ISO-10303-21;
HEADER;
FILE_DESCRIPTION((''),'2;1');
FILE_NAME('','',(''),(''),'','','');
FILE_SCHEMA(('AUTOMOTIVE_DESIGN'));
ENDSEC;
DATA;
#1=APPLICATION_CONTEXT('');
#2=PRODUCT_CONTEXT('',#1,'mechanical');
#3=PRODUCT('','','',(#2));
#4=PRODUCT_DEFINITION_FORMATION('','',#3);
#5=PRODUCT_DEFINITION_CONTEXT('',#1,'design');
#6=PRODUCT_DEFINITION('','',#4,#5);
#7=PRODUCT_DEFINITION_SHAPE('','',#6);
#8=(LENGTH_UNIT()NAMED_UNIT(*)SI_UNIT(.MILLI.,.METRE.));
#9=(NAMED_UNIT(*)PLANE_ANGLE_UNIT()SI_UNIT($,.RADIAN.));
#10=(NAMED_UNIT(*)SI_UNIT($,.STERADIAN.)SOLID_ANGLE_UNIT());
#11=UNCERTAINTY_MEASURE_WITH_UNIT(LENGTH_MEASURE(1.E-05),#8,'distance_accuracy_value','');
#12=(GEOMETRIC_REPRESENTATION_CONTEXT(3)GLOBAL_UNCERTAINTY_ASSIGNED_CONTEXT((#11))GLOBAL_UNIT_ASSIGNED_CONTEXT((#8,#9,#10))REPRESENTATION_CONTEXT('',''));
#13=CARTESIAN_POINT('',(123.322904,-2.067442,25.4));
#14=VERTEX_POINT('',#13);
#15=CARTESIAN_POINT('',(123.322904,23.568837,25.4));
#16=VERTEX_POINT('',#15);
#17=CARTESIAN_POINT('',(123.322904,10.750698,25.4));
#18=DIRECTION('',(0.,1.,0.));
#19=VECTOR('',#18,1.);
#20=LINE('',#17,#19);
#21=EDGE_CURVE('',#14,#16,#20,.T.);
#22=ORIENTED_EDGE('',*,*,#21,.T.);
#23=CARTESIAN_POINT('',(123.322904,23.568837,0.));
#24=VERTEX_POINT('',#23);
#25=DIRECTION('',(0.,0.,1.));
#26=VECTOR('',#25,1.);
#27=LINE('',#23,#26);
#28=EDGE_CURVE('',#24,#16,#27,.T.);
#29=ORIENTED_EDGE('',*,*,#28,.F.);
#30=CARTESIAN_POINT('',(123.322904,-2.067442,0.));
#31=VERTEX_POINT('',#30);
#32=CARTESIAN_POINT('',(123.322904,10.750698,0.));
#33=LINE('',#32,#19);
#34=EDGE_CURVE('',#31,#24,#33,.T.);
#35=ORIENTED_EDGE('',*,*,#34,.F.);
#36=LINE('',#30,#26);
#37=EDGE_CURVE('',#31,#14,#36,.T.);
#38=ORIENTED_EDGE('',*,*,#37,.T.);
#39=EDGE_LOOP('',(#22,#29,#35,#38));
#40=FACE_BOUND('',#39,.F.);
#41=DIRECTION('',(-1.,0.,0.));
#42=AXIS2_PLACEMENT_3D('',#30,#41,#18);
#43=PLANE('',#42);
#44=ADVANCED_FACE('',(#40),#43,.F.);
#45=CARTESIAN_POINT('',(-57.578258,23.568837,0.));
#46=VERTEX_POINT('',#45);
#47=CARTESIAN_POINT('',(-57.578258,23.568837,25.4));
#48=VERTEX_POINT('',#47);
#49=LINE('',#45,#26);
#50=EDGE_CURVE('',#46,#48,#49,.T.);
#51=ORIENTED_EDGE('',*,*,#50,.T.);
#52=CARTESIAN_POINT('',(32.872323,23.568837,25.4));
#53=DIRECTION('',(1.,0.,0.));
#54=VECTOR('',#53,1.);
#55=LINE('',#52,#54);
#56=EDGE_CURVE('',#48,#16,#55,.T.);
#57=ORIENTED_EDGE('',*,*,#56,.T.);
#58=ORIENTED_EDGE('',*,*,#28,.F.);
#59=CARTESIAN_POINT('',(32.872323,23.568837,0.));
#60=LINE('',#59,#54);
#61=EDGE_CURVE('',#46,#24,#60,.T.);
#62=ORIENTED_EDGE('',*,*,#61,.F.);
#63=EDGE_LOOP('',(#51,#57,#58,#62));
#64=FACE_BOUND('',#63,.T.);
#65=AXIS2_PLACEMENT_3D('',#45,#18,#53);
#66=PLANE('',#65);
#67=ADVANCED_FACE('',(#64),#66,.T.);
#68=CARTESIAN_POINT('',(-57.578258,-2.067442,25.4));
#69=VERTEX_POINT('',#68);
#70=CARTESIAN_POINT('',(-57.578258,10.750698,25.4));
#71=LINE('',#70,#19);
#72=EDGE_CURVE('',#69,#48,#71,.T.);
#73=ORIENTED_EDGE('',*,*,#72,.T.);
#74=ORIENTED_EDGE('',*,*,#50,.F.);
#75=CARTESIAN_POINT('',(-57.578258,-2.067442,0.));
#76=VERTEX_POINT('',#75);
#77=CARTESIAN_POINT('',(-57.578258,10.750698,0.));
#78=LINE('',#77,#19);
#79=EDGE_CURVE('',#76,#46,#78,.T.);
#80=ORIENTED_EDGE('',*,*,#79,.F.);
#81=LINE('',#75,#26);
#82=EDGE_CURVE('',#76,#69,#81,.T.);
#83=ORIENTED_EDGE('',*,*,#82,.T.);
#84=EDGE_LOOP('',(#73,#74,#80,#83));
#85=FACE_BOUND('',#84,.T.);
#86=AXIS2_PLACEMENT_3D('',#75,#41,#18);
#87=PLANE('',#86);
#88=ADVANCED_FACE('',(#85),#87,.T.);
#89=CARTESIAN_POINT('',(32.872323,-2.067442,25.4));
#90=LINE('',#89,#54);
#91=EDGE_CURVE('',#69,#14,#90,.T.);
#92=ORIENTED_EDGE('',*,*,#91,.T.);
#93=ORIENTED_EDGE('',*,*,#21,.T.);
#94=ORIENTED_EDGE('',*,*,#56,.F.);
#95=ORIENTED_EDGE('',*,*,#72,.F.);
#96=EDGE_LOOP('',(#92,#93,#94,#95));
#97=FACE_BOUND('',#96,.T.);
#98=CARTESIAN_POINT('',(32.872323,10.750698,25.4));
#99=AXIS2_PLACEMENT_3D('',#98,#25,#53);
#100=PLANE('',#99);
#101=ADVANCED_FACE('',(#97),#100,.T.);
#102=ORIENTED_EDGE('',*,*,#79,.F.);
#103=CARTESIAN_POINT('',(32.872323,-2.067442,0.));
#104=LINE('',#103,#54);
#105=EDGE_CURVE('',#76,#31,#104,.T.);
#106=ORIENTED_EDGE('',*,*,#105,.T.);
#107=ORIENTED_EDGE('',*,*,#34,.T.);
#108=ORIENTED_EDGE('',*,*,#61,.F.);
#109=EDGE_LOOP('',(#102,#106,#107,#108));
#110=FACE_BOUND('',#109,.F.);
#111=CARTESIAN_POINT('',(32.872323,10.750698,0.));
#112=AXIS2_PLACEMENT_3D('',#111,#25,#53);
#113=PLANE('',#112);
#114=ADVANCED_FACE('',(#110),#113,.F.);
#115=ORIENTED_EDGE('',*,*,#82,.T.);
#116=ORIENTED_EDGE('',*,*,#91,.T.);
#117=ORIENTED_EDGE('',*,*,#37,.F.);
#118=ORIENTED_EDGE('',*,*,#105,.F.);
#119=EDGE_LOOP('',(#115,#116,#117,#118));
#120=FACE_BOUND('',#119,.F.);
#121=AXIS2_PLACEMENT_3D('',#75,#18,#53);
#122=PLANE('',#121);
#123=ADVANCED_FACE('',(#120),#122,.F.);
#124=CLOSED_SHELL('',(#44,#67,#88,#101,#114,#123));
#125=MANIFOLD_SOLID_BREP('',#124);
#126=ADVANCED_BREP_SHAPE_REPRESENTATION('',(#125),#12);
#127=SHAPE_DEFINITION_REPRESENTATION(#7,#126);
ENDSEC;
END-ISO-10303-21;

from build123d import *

# Parameters (mm, degrees)
F0_W     = 180.9011623263
F0_H     = 25.6362787914
F1_DEPTH = 25.4


# Not quite as in the source:
# - a feature of the source that left no trace in its solid (it failed there, or was rolled back) is left out


with BuildPart() as f1:
    # F0 (on Top) → F1 (new body)
    with BuildSketch(Plane.XY):
        with Locations((32.8723229468, 10.7506975764)):
            Rectangle(F0_W, F0_H)
    extrude(amount=F1_DEPTH)


solid = f1.part
